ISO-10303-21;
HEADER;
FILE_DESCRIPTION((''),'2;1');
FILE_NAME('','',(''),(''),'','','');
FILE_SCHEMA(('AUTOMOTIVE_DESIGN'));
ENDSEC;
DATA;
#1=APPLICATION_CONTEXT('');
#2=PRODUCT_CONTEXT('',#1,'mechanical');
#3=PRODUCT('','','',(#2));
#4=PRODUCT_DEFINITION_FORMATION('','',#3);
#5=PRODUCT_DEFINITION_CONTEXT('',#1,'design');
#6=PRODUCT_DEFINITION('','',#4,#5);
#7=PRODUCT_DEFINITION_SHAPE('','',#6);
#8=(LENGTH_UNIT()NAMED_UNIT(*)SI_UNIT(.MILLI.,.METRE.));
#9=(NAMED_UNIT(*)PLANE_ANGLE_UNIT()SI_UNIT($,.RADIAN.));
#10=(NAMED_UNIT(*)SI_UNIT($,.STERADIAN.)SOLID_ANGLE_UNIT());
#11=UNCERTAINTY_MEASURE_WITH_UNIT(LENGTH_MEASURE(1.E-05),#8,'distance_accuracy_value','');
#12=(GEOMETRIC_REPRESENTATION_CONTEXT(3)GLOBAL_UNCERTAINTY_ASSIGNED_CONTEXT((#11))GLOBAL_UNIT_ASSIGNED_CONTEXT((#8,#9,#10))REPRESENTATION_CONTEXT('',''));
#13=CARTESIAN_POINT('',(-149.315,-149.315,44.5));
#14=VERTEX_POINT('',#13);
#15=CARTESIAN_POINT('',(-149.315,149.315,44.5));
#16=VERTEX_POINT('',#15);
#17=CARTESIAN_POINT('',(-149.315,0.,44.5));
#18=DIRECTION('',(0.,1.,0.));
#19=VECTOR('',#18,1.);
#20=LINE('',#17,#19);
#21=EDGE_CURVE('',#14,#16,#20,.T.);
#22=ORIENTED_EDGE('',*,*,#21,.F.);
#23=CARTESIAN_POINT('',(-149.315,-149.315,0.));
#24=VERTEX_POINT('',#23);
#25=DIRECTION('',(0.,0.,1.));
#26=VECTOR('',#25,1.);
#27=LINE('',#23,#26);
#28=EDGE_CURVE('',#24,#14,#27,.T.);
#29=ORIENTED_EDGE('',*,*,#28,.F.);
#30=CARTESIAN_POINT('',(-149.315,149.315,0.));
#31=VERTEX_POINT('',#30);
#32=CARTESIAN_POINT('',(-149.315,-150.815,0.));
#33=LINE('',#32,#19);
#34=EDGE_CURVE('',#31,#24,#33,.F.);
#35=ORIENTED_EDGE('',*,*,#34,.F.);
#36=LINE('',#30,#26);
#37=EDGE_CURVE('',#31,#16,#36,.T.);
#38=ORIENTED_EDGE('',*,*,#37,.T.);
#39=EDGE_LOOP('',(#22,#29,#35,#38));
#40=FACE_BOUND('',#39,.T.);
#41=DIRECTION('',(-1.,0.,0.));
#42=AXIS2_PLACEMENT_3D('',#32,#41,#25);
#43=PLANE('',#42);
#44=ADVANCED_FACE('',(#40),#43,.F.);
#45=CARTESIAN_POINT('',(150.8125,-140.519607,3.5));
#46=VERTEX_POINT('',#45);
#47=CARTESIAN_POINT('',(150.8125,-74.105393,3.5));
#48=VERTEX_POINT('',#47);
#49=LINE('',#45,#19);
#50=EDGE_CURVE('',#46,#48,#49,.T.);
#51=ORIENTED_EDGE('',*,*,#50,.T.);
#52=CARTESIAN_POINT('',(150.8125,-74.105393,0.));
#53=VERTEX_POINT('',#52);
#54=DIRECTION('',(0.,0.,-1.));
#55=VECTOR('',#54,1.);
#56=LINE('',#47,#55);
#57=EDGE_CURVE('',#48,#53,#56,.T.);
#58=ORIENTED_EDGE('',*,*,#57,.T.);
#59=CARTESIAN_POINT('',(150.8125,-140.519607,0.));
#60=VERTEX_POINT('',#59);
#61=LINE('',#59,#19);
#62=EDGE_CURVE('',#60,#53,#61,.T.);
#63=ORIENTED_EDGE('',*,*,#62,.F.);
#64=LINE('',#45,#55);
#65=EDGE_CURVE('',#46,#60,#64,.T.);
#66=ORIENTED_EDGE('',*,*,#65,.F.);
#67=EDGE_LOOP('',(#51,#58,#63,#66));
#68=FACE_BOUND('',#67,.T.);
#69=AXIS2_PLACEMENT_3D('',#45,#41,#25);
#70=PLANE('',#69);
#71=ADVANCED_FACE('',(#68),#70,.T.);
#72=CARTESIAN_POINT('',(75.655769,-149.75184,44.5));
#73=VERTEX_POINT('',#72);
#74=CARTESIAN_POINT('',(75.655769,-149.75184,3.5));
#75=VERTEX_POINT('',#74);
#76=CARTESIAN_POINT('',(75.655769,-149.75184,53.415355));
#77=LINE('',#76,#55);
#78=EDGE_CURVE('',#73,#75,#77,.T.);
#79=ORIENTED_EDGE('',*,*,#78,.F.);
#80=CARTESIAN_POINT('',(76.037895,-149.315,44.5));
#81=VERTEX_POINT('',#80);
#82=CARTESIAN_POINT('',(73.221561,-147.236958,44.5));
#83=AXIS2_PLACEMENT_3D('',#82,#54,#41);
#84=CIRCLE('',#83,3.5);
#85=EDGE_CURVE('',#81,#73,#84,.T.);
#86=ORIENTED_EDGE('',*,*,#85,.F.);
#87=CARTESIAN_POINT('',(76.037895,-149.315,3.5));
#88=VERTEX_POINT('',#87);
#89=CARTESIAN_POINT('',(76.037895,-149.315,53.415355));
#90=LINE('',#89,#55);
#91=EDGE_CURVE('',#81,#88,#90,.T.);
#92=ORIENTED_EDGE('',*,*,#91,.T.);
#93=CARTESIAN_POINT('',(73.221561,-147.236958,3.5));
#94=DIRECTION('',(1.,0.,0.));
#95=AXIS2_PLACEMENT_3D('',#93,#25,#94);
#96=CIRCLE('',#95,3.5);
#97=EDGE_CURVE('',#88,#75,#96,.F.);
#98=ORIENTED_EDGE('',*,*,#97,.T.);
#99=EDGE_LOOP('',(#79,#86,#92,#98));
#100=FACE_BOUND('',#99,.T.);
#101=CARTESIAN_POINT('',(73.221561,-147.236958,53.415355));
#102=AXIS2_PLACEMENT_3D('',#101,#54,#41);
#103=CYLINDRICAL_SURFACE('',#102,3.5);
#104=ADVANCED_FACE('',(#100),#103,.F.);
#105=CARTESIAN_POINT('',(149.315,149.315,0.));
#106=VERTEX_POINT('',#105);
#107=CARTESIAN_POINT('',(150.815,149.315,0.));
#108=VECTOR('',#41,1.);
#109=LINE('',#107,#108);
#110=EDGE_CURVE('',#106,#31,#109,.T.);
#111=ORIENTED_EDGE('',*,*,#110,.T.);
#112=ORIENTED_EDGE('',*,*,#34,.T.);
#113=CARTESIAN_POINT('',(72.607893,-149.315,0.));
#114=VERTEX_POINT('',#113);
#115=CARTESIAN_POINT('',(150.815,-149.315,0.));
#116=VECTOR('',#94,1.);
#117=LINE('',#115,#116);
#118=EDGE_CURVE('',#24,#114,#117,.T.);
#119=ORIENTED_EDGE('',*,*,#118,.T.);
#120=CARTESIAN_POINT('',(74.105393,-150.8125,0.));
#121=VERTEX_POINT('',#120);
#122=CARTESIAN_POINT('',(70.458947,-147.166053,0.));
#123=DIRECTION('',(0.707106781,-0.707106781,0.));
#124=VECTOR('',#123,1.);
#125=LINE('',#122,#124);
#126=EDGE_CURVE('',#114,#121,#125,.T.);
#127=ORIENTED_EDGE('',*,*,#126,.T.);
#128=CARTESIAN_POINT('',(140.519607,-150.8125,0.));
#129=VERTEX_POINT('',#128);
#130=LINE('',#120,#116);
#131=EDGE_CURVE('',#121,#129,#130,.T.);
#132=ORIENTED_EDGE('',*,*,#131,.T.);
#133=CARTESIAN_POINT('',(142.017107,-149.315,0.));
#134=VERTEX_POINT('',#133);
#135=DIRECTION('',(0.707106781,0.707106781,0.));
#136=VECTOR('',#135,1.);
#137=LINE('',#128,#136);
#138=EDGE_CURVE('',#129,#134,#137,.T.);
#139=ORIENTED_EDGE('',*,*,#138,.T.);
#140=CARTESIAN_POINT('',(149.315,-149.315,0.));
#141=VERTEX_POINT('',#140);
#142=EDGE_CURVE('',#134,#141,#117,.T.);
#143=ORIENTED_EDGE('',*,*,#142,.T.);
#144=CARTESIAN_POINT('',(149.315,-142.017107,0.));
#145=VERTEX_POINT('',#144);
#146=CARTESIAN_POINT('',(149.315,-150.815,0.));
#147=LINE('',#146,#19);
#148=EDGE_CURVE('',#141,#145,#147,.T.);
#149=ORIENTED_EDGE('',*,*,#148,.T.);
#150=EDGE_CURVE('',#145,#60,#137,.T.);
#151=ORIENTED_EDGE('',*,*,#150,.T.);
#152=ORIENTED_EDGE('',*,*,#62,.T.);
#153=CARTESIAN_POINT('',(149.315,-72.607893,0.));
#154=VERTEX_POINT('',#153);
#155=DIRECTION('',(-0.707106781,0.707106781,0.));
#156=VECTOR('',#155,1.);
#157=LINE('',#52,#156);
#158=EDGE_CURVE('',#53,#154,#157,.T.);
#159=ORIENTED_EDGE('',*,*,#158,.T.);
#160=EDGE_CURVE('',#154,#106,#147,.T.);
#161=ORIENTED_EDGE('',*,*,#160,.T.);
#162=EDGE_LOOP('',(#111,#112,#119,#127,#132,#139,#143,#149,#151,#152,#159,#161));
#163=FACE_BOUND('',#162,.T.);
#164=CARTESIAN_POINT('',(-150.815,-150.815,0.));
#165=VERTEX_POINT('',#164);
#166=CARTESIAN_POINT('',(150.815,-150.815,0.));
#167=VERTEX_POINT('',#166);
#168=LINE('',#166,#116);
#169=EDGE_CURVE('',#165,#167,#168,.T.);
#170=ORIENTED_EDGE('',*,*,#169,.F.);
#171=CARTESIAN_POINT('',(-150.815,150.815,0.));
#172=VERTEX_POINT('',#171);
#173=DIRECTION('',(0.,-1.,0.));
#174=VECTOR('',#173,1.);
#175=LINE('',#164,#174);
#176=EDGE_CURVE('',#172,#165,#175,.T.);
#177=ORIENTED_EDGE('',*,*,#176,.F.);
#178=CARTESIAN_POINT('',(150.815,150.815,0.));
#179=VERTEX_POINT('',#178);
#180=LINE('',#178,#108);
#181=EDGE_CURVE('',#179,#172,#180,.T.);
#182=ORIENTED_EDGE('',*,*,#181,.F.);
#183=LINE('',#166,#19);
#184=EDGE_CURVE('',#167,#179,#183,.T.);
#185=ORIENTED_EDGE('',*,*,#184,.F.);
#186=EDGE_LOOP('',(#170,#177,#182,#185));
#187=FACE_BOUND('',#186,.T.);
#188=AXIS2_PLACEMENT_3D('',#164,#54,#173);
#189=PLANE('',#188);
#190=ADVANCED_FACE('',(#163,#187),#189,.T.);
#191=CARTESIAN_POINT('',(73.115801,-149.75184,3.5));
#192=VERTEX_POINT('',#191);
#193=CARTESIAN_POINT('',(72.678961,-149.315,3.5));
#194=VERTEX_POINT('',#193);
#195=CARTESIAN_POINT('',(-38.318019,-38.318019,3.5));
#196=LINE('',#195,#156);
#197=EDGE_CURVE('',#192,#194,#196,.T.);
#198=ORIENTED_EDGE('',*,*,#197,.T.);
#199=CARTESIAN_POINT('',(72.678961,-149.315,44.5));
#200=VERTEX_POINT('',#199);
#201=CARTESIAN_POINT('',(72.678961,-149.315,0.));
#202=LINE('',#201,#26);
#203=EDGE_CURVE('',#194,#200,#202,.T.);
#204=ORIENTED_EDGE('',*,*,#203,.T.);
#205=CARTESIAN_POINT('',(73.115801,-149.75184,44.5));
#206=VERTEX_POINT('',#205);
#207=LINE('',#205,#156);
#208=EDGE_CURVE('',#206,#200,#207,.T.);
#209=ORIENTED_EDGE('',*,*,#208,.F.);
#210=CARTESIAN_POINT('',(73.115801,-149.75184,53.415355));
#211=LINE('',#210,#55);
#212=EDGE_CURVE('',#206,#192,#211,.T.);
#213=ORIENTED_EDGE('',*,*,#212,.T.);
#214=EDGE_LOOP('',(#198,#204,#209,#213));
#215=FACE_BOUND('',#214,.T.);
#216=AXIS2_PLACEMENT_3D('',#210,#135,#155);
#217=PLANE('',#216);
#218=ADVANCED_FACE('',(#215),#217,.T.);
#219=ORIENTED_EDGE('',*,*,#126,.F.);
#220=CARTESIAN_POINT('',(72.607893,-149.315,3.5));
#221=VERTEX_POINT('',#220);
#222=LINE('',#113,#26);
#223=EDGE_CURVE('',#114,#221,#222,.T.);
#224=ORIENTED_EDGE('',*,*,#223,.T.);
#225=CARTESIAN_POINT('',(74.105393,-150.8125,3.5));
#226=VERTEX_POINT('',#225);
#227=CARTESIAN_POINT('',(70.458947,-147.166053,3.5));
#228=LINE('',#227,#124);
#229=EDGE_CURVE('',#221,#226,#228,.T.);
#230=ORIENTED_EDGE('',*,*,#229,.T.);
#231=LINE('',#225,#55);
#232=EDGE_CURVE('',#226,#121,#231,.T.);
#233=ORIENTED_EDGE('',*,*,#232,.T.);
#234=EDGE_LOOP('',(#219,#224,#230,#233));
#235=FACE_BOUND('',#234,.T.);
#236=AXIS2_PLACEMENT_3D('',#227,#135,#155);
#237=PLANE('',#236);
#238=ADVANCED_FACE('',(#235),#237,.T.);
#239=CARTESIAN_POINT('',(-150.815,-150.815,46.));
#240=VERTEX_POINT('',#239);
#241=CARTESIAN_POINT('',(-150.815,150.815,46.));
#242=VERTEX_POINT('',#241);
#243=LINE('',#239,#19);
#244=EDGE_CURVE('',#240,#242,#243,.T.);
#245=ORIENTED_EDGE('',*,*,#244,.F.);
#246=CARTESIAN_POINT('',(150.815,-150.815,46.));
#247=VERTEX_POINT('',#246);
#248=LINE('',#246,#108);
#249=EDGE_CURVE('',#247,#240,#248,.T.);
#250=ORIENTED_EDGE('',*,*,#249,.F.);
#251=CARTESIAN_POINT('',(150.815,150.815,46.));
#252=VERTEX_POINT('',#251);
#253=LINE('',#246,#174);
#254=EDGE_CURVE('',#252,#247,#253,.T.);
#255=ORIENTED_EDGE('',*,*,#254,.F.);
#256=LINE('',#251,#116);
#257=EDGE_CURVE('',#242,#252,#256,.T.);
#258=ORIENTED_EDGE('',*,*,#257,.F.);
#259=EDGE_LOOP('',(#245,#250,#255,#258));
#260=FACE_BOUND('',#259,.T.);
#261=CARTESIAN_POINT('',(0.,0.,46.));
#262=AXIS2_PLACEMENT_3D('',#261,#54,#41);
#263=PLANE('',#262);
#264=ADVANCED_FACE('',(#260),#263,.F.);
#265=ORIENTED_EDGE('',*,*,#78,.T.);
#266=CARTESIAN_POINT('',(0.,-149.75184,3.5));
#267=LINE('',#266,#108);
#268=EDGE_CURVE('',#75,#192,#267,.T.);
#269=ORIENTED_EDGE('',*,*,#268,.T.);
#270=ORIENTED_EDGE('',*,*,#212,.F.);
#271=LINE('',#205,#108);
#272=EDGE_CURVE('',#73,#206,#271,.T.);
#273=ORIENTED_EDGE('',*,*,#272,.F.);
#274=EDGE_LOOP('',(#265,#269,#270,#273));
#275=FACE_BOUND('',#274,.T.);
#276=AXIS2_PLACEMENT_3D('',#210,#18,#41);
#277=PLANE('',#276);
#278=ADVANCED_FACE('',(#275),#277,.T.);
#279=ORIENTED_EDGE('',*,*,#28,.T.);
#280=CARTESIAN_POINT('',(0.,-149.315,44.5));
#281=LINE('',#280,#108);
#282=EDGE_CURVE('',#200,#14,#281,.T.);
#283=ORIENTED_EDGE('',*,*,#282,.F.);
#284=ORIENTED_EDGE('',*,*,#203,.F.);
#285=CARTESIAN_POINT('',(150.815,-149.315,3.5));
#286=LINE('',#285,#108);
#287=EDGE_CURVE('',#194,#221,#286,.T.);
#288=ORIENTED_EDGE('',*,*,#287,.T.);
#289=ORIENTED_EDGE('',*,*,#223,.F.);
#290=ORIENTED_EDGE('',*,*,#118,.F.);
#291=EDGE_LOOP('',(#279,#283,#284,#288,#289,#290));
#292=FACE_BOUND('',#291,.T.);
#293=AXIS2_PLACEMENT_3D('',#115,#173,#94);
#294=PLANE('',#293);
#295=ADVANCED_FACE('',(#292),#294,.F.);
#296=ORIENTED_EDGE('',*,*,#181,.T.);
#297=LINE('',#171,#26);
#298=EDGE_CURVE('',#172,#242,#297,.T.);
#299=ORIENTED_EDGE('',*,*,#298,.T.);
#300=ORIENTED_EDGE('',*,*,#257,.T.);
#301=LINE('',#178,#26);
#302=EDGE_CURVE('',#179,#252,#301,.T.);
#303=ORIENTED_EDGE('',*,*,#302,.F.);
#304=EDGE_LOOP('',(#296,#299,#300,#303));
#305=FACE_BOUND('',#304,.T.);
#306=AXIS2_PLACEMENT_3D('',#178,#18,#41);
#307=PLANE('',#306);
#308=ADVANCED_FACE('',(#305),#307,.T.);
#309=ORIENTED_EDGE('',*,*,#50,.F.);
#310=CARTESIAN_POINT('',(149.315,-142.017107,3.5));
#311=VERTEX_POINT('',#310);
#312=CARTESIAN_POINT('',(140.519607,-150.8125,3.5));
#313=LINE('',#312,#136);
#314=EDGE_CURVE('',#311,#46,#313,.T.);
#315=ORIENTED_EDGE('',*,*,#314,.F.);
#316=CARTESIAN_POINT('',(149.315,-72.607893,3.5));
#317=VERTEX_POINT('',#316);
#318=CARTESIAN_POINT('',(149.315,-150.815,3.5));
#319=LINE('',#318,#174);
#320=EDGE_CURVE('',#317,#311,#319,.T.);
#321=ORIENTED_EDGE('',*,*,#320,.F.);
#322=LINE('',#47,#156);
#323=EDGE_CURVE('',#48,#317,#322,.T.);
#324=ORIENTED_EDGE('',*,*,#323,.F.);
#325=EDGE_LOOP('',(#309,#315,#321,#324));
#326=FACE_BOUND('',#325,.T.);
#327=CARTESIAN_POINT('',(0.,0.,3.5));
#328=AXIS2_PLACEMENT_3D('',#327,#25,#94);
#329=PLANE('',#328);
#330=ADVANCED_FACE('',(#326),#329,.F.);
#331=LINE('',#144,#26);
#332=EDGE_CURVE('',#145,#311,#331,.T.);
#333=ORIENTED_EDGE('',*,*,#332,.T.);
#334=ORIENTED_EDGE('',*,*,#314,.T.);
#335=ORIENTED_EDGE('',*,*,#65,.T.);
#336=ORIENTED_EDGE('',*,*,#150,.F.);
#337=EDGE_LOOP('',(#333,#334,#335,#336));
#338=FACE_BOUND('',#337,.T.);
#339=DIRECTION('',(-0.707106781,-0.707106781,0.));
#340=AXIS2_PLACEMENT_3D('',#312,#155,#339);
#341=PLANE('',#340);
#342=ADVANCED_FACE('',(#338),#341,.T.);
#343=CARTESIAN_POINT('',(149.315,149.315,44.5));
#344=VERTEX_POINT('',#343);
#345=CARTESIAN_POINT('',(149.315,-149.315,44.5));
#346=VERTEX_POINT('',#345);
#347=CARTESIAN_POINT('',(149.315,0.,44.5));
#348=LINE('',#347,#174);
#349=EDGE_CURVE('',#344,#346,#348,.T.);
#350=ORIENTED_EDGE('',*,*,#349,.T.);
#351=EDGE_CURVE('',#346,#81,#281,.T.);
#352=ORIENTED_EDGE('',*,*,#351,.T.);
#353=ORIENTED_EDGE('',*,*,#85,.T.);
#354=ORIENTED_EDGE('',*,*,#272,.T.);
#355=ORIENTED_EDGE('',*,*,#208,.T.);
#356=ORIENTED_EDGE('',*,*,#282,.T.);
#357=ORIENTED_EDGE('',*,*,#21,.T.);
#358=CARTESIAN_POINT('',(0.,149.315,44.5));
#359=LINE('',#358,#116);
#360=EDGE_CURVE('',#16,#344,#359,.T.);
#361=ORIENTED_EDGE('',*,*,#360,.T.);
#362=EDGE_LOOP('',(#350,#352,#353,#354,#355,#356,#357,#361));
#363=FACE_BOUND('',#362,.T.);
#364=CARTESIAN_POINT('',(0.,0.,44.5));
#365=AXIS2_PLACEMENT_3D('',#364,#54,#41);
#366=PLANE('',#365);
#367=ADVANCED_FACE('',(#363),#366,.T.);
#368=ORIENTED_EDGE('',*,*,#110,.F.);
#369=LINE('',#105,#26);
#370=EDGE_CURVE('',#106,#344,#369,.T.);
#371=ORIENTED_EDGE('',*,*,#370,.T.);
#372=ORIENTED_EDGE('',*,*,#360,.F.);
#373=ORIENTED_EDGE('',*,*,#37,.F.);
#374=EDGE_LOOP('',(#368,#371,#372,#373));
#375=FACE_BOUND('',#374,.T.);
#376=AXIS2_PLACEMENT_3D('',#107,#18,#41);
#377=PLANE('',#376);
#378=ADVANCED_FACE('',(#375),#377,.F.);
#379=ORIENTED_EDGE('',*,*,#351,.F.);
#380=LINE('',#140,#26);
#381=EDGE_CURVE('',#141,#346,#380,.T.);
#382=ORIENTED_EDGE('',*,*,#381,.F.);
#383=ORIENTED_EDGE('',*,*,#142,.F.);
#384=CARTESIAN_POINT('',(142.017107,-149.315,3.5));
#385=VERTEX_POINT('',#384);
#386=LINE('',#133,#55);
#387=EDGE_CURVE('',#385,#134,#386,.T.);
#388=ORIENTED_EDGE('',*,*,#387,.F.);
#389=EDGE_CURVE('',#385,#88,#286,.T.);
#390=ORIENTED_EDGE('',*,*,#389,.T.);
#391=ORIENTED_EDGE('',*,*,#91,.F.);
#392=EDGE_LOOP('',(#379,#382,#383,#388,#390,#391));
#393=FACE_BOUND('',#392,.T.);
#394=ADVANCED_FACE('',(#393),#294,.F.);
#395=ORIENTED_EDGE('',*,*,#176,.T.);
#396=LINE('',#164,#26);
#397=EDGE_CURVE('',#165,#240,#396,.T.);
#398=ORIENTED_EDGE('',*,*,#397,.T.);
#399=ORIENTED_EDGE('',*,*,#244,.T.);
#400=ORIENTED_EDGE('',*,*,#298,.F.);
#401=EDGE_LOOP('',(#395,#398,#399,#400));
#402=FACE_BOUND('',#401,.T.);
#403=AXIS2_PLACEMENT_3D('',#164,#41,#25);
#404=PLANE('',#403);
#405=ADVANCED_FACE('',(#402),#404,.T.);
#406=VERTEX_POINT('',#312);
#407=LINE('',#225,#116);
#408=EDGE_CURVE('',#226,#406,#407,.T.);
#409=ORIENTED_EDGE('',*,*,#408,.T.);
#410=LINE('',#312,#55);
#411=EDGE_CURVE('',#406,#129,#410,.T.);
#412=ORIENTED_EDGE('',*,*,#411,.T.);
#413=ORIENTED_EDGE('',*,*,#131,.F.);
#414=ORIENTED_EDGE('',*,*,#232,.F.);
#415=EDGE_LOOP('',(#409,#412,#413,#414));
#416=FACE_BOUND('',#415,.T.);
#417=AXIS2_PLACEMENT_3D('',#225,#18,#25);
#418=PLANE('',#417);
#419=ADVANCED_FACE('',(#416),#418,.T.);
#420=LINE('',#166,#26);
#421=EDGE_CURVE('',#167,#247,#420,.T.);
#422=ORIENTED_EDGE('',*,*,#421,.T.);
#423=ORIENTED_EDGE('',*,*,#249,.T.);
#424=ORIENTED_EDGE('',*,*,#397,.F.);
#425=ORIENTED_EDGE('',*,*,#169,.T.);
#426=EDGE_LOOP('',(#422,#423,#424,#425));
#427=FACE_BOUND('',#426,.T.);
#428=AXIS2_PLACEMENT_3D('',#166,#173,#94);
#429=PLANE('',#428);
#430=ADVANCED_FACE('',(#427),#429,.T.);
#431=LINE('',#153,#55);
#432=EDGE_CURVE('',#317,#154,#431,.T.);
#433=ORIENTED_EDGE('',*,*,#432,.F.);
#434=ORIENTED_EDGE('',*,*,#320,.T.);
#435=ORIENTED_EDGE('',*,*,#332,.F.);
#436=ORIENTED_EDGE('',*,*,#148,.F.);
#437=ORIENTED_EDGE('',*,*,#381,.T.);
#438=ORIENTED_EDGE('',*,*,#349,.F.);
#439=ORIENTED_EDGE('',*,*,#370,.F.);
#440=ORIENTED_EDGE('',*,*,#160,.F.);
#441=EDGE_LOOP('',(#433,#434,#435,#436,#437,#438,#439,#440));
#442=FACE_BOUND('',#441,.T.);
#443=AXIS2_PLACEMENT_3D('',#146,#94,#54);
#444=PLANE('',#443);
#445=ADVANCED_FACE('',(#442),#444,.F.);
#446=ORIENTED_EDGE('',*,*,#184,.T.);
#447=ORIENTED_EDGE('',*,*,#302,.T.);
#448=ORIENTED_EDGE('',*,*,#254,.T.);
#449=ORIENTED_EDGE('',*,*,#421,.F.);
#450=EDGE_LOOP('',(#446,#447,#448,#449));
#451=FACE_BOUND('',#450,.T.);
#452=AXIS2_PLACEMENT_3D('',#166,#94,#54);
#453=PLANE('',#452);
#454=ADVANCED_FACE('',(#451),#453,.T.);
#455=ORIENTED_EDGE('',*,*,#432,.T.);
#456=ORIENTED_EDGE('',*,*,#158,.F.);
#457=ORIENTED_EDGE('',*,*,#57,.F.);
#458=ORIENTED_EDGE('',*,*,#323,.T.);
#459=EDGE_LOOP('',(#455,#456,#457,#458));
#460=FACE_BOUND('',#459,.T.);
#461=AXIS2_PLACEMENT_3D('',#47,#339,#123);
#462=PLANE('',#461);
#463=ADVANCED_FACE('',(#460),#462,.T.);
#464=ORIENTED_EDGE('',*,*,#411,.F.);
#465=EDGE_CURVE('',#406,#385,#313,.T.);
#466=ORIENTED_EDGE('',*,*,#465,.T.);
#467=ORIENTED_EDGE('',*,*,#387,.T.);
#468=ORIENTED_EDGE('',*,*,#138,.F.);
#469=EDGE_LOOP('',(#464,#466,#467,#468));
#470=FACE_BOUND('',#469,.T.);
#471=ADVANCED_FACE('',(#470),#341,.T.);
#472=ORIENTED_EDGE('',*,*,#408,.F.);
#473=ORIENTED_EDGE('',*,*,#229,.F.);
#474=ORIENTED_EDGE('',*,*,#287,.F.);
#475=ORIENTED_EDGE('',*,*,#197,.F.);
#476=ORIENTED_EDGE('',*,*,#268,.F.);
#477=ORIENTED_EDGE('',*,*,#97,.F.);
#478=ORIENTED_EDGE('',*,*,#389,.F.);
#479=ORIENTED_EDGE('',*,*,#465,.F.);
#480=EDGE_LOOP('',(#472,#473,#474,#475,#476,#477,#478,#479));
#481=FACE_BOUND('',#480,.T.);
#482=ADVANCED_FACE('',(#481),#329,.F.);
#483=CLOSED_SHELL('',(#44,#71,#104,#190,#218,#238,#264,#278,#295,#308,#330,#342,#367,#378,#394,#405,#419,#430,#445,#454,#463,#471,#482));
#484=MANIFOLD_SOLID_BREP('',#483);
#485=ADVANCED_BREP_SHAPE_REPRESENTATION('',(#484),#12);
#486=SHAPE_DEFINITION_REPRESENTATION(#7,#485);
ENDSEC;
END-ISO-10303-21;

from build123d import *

# Parameters (mm, degrees)
THICKEN1_START       = -150.815
THICKEN1_DEPTH       = 301.63
THICKEN1_2_OUTLINE_W = 298.63
THICKEN1_2_OUTLINE_H = 44.5
THICKEN1_2_DEPTH     = 1.5
THICKEN1_START_2     = 149.315
THICKEN1_3_OUTLINE_W = 298.63
THICKEN1_3_OUTLINE_H = 44.5
THICKEN1_3_DEPTH     = 1.5
CUT_EXTRUDE1_DEPTH   = 3.5
CUT_EXTRUDE2_DEPTH   = 44.5


# Read off the part's stored shape, not the designer's step: Thicken1
with BuildPart() as part:
    # Thicken1 outline → Thicken1 (new body)
    with BuildSketch(Plane(origin=(0, 0, 0), x_dir=(1, 0, 0), z_dir=(0, 1, 0)).offset(THICKEN1_START)):
        Polygon((-150.815, -46), (150.815, -46), (150.815, 0), (149.315, 0), (149.315, -44.5), (-149.315, -44.5), (-149.315, 0), (-150.815, 0), align=None)
    extrude(amount=THICKEN1_DEPTH)

    # Thicken1 2 outline → Thicken1 2 (add)
    with BuildSketch(Plane(origin=(0, 0, 0), x_dir=(1, 0, 0), z_dir=(0, 1, 0)).offset(THICKEN1_START)):
        with Locations((0, -22.25)):
            Rectangle(THICKEN1_2_OUTLINE_W, THICKEN1_2_OUTLINE_H)
    extrude(amount=THICKEN1_2_DEPTH)

    # Thicken1 3 outline → Thicken1 3 (add)
    with BuildSketch(Plane(origin=(0, 0, 0), x_dir=(1, 0, 0), z_dir=(0, 1, 0)).offset(THICKEN1_START_2)):
        with Locations((0, -22.25)):
            Rectangle(THICKEN1_3_OUTLINE_W, THICKEN1_3_OUTLINE_H)
    extrude(amount=THICKEN1_3_DEPTH)

    # Sketch2 → Cut-Extrude1 (cut)
    with BuildSketch(Plane.XY):
        Polygon((147.166053391, -70.458946609), (145.751839828, -71.873160172), (148.8125, -74.933820344), (148.8125, -139.691179656), (139.691179656, -148.8125), (74.933820344, -148.8125), (71.873160172, -145.751839828), (70.458946609, -147.166053391), (74.105393219, -150.8125), (140.519606781, -150.8125), (150.8125, -140.519606781), (150.8125, -74.105393219), align=None)
    extrude(amount=CUT_EXTRUDE1_DEPTH, mode=Mode.SUBTRACT)

    # Sketch3 → Cut-Extrude2 (cut)
    with BuildSketch(Plane.XY):
        with BuildLine():
            Line((73.180697047, -143.737196171), (70.140927125, -146.776966094))
            Line((70.140927125, -146.776966094), (73.115800859, -149.751839828))
            Line((73.115800859, -149.751839828), (75.655768509, -149.751839828))
            ThreePointArc((75.655768509, -149.751839828), (76.458227012, -145.905044907), (73.180697047, -143.737196171))
        make_face()
    extrude(amount=CUT_EXTRUDE2_DEPTH, mode=Mode.SUBTRACT)


solid = part.part
